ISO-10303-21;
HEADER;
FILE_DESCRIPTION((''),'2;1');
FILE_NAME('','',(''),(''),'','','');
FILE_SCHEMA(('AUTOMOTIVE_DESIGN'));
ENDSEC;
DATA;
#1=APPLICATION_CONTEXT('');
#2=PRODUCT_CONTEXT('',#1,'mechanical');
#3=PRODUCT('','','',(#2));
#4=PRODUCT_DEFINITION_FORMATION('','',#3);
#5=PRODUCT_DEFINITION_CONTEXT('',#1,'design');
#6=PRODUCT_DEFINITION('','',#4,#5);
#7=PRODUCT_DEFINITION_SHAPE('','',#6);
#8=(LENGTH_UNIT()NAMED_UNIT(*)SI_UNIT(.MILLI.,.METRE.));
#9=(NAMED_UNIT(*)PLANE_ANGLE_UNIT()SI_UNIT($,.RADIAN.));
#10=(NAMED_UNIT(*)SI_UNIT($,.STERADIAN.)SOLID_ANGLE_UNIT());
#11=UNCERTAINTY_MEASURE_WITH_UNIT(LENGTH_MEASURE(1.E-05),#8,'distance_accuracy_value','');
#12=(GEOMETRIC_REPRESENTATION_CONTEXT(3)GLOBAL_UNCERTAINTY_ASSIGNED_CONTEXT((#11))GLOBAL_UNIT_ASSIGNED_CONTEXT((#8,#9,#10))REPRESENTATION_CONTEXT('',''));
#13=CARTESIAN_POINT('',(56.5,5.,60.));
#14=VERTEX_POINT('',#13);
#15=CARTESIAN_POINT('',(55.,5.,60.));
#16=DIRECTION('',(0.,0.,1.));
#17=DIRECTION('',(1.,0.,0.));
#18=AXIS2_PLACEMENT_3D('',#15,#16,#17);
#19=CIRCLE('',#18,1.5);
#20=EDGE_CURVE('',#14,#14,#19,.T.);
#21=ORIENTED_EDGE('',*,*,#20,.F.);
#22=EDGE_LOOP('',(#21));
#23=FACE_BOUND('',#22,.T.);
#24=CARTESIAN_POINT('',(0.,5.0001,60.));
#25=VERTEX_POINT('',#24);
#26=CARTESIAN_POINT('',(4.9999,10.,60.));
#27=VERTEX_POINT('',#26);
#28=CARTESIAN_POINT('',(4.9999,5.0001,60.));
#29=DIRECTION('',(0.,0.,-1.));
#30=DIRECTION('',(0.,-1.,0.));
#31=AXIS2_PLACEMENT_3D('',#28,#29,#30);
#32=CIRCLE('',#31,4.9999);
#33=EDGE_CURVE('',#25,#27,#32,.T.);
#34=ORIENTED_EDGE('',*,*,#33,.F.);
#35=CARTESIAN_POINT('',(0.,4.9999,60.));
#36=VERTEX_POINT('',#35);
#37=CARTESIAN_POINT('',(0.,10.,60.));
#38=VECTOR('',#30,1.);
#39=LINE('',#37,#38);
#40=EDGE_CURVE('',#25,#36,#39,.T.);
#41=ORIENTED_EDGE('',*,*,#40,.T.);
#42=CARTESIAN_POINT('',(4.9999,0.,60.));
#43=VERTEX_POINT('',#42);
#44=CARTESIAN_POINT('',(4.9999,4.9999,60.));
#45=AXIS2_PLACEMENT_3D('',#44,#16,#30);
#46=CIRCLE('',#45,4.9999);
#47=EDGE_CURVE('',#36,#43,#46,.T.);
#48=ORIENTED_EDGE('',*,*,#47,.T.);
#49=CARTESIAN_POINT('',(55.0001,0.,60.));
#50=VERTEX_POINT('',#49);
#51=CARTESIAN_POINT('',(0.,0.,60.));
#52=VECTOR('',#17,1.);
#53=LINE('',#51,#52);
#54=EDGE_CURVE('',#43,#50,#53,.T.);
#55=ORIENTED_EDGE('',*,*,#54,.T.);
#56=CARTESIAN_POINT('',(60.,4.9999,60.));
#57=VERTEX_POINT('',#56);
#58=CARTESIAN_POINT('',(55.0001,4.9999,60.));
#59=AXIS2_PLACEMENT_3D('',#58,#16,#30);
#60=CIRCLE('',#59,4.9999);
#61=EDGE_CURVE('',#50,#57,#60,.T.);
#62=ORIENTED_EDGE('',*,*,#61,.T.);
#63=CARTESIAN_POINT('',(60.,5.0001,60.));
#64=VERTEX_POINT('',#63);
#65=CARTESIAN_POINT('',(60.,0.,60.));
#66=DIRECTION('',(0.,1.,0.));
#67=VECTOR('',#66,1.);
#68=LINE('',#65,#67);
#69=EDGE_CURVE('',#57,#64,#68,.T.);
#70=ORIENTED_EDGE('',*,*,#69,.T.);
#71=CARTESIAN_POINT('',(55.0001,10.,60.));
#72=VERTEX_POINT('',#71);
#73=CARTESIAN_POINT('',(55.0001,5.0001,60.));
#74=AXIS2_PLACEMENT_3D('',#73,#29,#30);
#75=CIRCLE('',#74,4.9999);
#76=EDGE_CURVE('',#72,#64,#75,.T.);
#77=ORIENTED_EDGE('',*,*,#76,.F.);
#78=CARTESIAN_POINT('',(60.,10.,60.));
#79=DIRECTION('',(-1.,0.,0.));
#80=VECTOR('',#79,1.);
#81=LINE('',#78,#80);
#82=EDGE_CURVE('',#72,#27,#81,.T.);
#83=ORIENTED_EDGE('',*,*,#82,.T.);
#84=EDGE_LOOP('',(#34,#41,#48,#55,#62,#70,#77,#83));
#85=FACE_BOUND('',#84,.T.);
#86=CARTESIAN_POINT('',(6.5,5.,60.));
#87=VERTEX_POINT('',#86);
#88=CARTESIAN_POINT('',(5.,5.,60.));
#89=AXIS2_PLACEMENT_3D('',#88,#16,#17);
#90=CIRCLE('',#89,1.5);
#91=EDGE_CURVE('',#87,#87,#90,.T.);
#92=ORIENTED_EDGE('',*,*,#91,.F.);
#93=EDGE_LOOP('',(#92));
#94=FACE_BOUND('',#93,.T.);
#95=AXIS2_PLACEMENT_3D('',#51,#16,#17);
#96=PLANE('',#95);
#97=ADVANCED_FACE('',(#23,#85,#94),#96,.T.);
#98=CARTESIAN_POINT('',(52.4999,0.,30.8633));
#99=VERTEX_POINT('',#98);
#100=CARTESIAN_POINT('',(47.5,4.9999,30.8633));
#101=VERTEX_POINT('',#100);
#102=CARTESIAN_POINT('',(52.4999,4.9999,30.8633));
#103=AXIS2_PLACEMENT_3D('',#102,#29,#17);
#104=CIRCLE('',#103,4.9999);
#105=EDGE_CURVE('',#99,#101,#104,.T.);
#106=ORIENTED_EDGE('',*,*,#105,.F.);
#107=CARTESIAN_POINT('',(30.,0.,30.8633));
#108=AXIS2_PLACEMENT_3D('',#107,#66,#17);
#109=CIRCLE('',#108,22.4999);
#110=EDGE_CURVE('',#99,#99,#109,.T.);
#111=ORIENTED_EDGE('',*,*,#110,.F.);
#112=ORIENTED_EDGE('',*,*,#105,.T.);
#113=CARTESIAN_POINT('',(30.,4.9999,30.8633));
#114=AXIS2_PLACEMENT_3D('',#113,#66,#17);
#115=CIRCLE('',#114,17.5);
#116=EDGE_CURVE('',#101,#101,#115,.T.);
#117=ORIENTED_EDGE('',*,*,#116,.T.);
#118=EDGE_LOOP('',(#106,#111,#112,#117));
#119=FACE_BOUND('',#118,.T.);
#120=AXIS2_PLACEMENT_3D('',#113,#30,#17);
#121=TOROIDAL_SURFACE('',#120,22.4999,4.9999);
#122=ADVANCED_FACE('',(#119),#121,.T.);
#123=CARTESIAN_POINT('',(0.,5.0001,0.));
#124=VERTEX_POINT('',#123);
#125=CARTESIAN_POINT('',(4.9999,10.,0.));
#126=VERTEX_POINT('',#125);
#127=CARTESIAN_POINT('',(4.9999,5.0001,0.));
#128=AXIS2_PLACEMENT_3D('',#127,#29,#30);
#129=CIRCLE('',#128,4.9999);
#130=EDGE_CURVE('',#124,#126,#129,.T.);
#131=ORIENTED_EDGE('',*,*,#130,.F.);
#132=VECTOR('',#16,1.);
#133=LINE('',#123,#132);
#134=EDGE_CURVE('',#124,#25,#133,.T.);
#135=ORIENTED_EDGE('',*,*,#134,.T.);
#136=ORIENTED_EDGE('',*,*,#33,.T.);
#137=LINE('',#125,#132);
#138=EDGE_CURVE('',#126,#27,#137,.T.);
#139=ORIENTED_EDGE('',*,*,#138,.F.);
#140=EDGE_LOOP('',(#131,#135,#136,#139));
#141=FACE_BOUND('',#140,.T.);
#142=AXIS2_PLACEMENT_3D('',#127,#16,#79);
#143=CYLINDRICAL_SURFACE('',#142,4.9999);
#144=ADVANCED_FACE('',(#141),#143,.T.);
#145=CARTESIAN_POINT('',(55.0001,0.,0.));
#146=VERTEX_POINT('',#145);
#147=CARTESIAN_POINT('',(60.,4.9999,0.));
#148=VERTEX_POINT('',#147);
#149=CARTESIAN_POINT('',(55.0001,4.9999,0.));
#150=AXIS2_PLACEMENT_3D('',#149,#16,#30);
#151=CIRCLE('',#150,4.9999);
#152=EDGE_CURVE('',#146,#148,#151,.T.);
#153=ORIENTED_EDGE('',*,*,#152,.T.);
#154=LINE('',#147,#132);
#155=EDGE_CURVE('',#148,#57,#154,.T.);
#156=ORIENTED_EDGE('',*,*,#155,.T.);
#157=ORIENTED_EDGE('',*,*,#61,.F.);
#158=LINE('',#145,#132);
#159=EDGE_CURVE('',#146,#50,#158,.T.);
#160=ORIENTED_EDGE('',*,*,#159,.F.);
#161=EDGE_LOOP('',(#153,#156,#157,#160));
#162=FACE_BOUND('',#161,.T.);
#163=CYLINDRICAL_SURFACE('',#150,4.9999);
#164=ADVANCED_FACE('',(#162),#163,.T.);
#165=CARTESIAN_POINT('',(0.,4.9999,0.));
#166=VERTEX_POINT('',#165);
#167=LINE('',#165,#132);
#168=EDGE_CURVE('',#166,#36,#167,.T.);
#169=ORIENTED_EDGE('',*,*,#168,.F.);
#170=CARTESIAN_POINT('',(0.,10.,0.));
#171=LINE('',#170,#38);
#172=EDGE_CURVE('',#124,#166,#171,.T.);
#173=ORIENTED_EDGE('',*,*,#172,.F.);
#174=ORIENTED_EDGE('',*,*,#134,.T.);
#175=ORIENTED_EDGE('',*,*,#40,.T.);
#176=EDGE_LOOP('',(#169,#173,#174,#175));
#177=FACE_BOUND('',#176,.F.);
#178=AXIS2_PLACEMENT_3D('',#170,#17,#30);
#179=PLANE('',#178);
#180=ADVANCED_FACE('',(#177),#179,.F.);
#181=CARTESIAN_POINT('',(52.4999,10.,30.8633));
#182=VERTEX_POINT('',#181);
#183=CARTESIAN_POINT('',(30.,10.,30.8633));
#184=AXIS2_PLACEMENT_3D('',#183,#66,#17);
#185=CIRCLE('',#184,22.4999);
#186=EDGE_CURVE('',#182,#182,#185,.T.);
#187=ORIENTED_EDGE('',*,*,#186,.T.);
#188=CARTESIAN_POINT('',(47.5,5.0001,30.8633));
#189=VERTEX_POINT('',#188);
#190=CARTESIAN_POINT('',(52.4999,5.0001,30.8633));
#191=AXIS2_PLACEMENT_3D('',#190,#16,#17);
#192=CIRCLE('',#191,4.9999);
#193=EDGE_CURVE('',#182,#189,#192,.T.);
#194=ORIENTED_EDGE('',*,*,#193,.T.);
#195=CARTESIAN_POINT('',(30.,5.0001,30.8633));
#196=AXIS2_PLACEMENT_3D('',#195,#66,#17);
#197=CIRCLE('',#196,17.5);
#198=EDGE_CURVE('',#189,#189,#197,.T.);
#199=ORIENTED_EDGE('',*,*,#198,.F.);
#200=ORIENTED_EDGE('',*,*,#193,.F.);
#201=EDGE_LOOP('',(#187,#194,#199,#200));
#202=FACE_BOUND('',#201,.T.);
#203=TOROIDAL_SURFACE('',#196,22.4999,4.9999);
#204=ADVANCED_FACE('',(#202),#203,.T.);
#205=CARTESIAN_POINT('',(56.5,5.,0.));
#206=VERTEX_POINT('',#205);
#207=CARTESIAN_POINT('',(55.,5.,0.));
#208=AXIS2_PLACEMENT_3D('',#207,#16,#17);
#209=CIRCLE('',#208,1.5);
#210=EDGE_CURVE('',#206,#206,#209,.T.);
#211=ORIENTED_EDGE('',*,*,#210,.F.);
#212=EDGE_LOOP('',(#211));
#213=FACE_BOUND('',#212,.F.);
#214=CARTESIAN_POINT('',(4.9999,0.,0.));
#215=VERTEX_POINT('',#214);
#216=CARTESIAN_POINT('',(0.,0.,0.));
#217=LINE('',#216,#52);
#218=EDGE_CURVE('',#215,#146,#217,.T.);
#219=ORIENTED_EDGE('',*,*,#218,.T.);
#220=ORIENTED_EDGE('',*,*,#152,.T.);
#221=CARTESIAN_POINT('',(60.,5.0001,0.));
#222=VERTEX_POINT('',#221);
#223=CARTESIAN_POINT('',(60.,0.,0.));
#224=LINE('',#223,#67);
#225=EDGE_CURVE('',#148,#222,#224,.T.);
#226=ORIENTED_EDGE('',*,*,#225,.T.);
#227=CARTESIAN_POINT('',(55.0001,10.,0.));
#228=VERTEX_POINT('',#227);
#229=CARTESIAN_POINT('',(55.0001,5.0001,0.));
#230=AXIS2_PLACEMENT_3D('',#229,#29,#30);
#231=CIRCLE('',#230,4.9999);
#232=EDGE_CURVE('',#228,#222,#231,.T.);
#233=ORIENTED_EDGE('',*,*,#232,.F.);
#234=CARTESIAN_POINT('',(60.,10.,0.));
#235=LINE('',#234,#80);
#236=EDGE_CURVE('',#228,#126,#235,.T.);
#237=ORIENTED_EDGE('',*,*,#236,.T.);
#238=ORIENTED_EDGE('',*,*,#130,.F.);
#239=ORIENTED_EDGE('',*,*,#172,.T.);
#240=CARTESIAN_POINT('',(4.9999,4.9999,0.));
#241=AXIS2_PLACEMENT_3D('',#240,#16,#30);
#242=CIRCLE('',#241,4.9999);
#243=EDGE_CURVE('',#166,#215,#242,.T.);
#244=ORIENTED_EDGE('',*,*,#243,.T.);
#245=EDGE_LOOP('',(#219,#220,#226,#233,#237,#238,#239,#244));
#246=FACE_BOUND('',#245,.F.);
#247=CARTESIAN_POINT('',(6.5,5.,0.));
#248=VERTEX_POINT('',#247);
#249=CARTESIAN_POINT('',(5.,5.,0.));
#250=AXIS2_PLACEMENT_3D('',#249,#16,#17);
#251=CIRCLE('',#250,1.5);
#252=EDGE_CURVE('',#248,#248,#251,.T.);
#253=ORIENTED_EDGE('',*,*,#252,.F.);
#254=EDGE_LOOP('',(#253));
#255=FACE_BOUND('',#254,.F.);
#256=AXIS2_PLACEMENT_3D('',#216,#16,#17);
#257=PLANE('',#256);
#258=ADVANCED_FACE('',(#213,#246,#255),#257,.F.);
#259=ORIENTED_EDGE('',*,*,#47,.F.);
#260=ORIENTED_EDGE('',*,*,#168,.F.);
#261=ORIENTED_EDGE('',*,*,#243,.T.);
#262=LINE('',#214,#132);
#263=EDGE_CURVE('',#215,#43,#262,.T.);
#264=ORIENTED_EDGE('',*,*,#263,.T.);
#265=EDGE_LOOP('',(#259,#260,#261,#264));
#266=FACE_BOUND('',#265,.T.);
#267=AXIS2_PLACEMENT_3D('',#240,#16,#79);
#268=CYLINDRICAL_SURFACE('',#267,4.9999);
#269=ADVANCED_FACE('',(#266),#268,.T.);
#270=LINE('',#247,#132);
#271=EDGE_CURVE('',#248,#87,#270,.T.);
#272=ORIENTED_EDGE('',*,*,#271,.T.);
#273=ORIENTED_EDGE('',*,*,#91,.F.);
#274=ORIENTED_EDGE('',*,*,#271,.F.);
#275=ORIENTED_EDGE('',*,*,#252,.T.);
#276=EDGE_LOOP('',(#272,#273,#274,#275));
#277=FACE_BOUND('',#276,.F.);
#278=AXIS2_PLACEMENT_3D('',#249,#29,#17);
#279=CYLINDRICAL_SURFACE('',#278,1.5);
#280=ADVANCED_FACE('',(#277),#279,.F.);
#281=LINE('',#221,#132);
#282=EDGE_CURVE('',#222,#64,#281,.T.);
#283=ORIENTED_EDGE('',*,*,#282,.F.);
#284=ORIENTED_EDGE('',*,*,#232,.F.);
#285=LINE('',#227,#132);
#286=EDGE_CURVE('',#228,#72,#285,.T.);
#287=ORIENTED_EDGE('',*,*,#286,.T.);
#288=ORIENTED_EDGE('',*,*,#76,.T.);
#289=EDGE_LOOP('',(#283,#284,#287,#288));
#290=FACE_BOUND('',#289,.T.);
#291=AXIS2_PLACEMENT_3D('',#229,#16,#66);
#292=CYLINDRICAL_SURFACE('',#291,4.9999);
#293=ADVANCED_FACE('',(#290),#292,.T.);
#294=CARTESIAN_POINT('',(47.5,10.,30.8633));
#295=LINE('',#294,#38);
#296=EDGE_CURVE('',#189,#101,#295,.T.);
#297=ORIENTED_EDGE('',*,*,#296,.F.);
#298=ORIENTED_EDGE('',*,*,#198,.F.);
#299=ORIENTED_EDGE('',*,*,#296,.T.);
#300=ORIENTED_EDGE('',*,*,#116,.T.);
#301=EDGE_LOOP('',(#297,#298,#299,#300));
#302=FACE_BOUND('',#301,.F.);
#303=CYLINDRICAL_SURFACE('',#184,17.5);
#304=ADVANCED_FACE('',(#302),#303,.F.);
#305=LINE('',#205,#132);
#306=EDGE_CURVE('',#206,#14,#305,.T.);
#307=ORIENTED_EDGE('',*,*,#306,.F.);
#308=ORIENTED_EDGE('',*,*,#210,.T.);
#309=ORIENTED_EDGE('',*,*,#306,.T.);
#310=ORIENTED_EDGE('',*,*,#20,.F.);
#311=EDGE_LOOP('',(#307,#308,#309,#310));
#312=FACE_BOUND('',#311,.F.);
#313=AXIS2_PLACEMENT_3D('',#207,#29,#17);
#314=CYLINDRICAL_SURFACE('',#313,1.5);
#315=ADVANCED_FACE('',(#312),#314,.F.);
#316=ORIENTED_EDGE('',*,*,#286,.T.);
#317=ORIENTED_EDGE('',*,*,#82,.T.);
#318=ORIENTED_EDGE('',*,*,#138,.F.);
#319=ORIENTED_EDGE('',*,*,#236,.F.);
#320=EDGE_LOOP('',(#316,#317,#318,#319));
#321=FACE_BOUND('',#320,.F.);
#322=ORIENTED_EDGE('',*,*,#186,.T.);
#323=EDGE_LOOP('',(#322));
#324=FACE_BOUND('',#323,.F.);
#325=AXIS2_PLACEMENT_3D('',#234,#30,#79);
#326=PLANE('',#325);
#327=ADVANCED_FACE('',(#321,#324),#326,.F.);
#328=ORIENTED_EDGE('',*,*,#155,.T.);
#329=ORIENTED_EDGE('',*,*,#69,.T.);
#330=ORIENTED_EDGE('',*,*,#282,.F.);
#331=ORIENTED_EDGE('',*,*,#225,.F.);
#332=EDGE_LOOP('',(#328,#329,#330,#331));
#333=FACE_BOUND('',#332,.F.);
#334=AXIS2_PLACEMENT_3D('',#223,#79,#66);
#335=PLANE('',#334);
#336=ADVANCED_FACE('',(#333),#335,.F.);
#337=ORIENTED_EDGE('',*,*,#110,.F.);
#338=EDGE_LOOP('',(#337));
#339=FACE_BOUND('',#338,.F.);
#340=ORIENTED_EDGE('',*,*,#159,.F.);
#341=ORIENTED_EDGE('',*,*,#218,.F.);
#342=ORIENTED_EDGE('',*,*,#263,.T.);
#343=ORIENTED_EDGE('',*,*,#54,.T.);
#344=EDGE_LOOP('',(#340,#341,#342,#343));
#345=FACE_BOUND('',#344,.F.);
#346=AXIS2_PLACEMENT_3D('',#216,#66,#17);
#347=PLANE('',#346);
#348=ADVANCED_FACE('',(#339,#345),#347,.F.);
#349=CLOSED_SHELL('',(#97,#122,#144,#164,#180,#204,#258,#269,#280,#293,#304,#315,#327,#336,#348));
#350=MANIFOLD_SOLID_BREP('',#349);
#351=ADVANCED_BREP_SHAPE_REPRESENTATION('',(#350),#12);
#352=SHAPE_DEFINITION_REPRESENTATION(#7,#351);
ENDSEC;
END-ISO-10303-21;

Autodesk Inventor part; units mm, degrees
ref_plane "YZ Plane" through (0, 0, 0) normal (1, 0, 0) x (0, 1, 0)
ref_plane "XZ Plane" through (0, 0, 0) normal (0, 1, 0) x (-1, 0, 0)
ref_plane "XY Plane" through (0, 0, 0) normal (0, 0, 1) x (1, 0, 0)
sketch "Sketch1" plane through (0, 0, 0) normal (0, 0, 1) x (1, 0, 0)
  line L0 (0, 0) -> (60, 0)
  line L1 (60, 0) -> (60, 10)
  line L2 (60, 10) -> (0, 10)
  line L3 (0, 10) -> (0, 0)
  line L4 (0, 0) -> (0, 5) construction
  line L5 (0, 5) -> (5, 5) construction
  circle A0 centre (5, 5) radius 1.5
  circle A1 centre (55, 5) radius 1.5
  dimension "d0" = 60
  dimension "d1" = 10
  dimension "d2" = 5
  dimension "d3" = 5
  dimension "d4" = 3
  dimension "d5" = 3
  dimension "d6" = 5
  dimension "d7" = 5
extrude "Extrusion1" add sketch "Sketch1" along normal blind 60
sketch "Sketch2" plane through (0, 10, 0) normal (0, 1, 0) x (1, 0, 0)
  circle A0 centre (30, -30.8633) radius 17.5
  line L0 (0, 0) -> (0, -60) projected
  line L1 (60, 0) -> (0, 0) projected
  dimension "d10" = 35
  dimension "d12" = 30
  dimension "d13" = 30.8633
extrude "Extrusion2" cut sketch "Sketch2" against normal blind 10
fillet "Fillet1" radius 5 6 edges at (0, 10, 30) (60, 10, 30) (60, 0, 30) (0, 0, 30) (12.5, 0, 30.8633) (12.5, 10, 30.8633)
properties part number "60x10SlimGrommet"
